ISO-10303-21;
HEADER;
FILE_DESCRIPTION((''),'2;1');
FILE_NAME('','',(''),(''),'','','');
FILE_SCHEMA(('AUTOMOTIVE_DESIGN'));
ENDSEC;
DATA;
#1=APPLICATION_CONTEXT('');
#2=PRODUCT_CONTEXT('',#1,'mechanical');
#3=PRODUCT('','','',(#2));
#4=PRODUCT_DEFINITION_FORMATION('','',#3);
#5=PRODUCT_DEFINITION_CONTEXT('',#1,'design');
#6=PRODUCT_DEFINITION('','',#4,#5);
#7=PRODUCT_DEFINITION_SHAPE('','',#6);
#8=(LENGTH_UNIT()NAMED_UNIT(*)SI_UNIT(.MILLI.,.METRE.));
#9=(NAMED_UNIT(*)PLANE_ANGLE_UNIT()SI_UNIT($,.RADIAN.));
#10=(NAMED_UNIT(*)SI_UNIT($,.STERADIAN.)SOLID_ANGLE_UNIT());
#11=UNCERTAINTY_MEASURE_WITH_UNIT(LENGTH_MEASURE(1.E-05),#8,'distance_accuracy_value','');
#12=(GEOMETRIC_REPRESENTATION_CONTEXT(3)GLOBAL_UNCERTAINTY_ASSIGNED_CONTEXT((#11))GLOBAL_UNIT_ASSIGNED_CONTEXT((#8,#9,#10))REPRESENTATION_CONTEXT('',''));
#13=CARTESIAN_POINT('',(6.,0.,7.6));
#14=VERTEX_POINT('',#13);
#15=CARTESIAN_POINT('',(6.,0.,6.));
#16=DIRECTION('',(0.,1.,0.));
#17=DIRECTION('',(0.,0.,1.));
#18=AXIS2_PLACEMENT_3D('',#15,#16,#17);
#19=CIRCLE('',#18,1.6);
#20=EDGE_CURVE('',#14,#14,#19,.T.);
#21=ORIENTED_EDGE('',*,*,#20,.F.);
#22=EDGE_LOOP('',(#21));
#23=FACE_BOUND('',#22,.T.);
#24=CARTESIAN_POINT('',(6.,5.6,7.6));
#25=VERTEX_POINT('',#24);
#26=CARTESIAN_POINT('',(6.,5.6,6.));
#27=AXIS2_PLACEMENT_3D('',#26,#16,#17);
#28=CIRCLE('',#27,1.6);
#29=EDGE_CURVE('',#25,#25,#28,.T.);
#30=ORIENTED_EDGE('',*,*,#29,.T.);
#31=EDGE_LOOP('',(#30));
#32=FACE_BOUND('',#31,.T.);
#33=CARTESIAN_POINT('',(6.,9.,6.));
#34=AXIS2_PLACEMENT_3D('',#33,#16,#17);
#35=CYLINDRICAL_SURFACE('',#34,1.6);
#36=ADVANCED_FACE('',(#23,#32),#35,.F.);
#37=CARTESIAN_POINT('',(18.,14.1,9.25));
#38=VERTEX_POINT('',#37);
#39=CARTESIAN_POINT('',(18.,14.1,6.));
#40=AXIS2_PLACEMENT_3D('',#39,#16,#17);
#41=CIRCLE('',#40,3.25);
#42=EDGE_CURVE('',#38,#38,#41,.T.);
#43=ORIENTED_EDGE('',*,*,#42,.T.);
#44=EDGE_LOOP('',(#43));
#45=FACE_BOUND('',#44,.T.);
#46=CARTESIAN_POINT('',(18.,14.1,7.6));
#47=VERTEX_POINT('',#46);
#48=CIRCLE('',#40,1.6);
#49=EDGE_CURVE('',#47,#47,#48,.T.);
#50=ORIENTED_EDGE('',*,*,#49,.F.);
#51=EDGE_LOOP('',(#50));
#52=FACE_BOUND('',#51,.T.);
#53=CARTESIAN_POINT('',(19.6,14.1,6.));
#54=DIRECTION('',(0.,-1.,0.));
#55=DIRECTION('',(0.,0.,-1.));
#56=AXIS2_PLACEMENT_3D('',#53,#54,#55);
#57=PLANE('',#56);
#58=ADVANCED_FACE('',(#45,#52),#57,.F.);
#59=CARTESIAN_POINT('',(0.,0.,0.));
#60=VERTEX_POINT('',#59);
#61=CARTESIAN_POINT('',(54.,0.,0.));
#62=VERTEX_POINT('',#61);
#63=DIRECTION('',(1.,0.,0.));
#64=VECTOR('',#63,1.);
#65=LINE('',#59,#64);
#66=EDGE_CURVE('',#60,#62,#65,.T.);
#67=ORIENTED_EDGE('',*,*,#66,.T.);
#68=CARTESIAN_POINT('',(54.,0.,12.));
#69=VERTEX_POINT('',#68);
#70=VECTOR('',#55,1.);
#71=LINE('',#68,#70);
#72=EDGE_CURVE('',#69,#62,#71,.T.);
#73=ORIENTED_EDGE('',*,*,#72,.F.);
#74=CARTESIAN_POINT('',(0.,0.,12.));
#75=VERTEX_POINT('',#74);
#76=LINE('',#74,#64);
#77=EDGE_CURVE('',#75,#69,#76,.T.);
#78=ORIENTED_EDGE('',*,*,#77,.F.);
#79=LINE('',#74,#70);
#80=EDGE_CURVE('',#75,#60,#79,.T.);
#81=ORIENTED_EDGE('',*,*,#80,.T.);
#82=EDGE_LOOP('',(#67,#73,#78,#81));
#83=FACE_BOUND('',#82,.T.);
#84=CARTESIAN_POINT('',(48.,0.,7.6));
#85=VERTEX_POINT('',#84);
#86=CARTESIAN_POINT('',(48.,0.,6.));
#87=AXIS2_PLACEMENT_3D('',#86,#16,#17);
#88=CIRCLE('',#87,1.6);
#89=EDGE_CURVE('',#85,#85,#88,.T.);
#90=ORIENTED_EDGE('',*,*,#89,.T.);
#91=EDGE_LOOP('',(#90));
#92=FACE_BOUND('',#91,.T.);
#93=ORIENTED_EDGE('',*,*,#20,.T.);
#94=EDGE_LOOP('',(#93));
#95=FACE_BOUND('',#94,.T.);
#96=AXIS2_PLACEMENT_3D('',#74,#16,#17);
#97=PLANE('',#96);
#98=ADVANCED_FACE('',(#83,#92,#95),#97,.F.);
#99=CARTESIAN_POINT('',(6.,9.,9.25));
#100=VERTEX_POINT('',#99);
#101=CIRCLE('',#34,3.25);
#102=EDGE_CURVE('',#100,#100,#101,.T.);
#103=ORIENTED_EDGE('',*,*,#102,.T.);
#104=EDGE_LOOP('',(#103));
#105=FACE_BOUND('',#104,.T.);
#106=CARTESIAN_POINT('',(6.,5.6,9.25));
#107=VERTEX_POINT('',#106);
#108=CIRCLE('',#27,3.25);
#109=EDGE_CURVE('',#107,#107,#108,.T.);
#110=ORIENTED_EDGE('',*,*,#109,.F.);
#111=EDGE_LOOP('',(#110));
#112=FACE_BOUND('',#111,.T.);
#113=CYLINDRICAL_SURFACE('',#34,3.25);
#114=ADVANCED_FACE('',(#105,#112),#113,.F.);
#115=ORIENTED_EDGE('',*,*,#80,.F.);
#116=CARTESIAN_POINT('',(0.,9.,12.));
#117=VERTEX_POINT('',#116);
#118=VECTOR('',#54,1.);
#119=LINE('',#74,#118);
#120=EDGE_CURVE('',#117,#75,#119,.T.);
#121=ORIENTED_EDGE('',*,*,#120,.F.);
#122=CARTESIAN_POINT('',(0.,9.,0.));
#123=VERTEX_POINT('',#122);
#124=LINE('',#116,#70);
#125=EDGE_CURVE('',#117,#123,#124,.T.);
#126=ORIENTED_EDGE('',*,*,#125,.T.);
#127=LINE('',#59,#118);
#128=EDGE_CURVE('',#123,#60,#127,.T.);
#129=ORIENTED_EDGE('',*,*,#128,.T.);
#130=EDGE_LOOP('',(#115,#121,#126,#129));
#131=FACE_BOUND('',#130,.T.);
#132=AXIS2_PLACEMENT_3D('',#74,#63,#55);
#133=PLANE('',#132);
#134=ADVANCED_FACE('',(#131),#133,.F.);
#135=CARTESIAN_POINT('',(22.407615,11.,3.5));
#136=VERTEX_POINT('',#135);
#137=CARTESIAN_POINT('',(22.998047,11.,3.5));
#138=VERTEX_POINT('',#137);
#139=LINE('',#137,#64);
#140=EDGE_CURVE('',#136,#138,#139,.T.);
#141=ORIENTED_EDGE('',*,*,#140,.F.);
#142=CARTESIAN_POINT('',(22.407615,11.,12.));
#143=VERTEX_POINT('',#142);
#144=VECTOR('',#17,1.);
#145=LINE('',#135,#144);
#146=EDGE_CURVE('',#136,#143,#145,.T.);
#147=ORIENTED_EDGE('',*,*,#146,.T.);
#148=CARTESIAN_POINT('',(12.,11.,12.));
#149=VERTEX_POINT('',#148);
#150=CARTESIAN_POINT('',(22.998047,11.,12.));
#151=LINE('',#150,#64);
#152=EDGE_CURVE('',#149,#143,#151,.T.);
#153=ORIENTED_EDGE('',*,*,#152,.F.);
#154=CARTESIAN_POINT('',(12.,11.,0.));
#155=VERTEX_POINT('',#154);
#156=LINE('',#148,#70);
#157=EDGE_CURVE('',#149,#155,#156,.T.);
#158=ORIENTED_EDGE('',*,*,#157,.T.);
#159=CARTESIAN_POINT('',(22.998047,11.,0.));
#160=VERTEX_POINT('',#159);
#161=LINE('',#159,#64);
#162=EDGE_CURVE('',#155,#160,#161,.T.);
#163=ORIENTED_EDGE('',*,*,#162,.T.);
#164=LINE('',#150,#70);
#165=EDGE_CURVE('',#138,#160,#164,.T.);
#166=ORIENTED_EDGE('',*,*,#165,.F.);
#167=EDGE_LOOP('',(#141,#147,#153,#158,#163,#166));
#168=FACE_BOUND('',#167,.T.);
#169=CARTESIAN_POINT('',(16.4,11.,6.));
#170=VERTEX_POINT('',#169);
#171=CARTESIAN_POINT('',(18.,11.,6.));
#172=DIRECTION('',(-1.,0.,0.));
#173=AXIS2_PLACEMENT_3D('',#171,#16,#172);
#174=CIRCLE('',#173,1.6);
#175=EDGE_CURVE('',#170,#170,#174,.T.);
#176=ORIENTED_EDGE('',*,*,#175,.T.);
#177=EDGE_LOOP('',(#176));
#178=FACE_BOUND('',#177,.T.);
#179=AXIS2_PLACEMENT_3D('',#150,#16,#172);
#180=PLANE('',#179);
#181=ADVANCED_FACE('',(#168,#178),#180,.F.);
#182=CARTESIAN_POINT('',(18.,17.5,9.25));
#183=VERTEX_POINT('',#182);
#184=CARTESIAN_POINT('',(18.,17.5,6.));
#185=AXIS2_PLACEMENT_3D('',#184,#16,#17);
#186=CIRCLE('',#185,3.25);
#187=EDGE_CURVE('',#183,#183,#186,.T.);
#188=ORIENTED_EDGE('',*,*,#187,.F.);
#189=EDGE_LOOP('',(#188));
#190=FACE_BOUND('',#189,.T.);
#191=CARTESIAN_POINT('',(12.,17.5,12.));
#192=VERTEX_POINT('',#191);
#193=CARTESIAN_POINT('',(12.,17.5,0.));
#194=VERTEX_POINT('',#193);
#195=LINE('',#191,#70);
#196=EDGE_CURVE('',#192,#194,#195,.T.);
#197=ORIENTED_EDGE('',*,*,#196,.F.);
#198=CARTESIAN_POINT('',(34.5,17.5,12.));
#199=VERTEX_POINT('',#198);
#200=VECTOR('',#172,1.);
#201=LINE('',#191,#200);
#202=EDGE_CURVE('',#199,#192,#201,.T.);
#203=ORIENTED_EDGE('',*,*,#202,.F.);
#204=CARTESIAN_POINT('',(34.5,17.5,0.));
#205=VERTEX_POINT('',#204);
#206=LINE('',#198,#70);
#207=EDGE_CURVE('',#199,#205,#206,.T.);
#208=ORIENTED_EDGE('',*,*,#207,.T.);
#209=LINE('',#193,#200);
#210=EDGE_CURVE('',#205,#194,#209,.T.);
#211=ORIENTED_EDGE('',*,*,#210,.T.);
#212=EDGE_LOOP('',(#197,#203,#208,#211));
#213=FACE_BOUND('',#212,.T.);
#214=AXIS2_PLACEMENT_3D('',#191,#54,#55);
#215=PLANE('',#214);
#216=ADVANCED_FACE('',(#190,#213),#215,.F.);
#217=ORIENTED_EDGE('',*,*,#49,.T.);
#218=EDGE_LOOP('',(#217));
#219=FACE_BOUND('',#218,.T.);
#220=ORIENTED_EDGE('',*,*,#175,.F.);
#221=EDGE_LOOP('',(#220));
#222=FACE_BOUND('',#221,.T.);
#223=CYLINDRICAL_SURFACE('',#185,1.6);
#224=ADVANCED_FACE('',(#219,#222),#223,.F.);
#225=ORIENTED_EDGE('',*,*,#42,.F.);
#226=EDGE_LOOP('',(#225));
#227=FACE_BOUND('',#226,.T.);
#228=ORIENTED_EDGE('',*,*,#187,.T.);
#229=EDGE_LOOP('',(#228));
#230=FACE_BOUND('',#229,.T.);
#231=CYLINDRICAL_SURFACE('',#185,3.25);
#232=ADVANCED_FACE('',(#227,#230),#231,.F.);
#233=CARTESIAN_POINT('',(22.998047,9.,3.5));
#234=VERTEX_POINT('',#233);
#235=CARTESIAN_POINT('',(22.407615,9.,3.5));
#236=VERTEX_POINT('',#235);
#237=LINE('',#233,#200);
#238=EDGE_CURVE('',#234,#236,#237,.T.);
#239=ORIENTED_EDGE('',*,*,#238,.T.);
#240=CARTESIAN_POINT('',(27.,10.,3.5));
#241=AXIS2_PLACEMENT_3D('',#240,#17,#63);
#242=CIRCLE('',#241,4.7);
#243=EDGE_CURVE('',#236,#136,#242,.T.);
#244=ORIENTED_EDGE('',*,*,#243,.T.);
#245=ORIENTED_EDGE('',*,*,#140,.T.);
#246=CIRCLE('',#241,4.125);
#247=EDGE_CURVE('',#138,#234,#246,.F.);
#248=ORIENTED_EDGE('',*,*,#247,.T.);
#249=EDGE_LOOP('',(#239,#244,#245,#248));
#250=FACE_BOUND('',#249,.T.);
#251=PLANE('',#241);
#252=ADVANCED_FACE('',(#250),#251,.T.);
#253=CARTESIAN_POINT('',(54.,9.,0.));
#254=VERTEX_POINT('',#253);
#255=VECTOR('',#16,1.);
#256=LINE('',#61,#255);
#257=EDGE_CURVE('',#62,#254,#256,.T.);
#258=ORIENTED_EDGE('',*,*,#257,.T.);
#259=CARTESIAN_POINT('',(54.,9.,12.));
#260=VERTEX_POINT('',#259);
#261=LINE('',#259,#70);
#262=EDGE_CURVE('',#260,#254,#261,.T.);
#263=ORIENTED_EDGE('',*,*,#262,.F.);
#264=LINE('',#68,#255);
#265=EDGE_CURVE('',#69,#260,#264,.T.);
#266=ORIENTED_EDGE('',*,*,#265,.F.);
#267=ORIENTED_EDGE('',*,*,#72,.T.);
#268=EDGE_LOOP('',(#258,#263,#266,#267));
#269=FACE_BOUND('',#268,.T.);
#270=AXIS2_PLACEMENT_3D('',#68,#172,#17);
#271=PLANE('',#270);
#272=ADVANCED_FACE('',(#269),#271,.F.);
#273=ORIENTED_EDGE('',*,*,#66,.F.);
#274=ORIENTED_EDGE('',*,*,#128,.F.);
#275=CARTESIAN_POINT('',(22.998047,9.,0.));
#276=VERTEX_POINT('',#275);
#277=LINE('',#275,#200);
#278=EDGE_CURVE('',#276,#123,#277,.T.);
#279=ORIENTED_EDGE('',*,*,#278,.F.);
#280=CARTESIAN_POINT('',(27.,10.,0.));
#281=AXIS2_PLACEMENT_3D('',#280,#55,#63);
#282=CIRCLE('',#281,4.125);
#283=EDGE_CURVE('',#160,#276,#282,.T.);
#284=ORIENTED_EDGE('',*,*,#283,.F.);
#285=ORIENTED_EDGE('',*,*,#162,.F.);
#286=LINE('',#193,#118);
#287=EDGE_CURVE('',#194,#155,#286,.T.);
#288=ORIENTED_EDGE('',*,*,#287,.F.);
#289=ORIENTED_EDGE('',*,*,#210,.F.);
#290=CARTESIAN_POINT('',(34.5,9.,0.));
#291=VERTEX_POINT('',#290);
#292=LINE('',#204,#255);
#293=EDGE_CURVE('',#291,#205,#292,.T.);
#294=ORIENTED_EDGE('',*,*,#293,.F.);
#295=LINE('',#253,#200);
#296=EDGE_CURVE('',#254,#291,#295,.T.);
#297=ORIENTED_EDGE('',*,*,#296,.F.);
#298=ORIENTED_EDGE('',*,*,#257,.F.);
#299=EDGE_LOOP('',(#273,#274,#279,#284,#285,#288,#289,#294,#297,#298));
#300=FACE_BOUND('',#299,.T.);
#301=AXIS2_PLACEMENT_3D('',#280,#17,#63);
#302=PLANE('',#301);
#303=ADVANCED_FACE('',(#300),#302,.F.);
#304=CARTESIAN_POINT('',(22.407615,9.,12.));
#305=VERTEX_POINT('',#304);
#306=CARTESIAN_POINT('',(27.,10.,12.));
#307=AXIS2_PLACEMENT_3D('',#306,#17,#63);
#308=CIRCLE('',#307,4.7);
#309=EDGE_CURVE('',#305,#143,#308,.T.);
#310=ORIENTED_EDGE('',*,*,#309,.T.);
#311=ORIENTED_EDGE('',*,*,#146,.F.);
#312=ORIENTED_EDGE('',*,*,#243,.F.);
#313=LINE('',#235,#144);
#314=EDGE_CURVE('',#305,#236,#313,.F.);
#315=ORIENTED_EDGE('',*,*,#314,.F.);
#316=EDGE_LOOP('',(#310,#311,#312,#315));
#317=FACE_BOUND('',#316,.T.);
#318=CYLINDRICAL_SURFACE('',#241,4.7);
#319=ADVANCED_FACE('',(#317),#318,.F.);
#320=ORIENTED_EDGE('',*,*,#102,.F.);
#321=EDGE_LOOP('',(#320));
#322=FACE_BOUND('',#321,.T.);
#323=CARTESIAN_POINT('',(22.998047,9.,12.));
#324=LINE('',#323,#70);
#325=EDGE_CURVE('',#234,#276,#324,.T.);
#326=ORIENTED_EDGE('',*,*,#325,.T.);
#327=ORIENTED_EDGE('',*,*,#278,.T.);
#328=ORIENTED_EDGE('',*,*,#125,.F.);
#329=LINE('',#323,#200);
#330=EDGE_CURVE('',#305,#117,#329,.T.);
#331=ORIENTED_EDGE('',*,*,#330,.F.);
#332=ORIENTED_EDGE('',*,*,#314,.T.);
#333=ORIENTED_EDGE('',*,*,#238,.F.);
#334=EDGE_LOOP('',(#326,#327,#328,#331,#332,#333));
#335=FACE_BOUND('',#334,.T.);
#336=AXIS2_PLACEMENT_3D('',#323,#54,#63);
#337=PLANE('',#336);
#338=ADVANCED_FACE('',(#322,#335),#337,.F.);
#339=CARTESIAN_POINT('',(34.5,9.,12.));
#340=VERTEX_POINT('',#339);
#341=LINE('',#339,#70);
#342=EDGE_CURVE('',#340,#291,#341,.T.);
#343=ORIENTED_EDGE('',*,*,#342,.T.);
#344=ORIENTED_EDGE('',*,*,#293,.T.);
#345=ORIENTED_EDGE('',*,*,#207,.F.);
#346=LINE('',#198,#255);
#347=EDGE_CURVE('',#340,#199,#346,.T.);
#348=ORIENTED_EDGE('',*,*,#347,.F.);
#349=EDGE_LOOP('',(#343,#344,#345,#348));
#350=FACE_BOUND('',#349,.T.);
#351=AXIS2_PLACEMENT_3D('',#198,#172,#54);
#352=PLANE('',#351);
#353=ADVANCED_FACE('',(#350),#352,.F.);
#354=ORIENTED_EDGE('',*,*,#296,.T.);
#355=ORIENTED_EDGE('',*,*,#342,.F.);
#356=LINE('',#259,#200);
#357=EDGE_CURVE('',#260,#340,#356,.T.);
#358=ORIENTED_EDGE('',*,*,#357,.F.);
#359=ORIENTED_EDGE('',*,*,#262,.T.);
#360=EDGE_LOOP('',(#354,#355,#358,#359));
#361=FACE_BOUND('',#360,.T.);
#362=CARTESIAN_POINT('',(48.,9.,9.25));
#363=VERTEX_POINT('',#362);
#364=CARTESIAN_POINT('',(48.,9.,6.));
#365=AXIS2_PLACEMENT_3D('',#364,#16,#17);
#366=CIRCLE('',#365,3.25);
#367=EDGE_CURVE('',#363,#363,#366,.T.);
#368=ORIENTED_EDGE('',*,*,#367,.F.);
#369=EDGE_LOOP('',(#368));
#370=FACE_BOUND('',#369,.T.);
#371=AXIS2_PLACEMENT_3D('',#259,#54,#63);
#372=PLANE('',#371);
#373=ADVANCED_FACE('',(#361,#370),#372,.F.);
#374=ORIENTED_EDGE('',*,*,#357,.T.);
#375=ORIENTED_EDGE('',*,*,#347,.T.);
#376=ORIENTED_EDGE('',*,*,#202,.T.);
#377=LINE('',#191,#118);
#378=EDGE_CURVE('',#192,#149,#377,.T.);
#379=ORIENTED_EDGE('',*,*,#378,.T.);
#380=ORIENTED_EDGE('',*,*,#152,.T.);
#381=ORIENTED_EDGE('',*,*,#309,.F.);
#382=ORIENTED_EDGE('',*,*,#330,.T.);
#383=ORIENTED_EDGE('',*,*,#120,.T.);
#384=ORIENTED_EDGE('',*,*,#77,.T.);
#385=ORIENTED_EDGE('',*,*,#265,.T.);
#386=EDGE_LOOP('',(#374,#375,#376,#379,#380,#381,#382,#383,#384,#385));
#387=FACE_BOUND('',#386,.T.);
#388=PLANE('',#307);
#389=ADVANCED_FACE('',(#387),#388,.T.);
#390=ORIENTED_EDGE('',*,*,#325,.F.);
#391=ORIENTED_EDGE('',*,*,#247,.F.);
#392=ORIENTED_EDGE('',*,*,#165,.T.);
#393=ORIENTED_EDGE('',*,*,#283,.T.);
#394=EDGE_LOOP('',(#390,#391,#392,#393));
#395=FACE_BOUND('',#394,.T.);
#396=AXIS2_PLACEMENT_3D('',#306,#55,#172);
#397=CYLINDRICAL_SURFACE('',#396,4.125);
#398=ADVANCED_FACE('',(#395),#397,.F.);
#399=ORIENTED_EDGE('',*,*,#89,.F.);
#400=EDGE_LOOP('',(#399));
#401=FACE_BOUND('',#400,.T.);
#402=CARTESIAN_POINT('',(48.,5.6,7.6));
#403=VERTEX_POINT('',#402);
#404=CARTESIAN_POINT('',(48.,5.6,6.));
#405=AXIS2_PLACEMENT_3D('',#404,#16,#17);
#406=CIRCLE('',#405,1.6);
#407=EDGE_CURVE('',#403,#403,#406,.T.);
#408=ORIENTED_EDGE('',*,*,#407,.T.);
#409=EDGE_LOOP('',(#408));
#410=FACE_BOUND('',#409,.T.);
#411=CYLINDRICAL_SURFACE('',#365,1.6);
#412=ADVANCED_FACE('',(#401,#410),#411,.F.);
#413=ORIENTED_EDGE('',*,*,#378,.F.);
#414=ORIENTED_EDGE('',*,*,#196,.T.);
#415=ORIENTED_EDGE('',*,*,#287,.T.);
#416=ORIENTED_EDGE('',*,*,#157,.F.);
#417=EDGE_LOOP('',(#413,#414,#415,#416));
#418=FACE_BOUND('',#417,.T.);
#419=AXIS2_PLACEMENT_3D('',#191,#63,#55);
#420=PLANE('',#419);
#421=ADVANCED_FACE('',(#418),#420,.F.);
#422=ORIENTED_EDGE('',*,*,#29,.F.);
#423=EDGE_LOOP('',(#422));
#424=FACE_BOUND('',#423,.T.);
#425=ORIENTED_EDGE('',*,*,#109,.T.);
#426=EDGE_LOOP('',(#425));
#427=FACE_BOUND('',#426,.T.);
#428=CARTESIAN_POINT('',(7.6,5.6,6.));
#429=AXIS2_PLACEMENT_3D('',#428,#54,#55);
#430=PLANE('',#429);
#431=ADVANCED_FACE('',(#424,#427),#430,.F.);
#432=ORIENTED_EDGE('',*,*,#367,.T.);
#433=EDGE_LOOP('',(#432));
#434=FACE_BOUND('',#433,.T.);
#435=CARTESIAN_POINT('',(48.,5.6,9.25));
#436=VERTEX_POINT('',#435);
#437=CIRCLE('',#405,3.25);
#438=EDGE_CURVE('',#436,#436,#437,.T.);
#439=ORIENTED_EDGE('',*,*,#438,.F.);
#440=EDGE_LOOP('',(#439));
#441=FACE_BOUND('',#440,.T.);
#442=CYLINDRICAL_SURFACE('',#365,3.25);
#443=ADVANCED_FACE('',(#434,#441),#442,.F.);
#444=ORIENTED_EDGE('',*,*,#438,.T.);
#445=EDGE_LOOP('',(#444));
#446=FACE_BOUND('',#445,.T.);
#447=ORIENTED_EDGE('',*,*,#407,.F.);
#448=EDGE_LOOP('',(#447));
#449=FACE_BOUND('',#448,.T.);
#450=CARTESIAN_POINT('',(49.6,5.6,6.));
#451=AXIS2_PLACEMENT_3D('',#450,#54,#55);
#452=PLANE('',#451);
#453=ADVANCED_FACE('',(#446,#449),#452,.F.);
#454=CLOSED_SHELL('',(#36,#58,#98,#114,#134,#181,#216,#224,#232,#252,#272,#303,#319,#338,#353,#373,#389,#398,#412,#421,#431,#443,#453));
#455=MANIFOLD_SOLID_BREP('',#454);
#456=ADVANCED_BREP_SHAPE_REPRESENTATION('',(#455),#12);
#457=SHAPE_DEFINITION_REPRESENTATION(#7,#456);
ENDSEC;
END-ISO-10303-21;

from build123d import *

# Parameters (mm, degrees)
AUFSATZ_LINEAR_AUSTRAGEN1_DEPTH                = 12
SKIZZE4_R                                      = 4.7
SCHNITT_LINEAR_AUSTRAGEN1_DEPTH                = 8.5
STIRNSENKUNG_START                             = 5.6
STIRNSENKUNG_F_R_M3_ZYLINDERSCHRAUBE_2_R       = 3.25
STIRNSENKUNG_F_R_M3_ZYLINDERSCHRAUBE_MIT_DEPTH = 3.4
STIRNSENKUNG_START_2                           = 14.1
STIRNSENKUNG_F_R_M3_ZYLINDERSCHRAUBE_3_O_R     = 3.25
STIRNSENKUNG_F_R_M3_ZYLINDERSCHRAUBE_3_DEPTH   = 3.4
STIRNSENKUNG_F_R_M3_ZYLINDERSCHRAUBE_4_O_R     = 1.6
STIRNSENKUNG_F_R_M3_ZYLINDERSCHRAUBE_4_DEPTH   = 5.6
STIRNSENKUNG_START_3                           = 11
STIRNSENKUNG_F_R_M3_ZYLINDERSCHRAUBE_5_O_R     = 1.6
STIRNSENKUNG_F_R_M3_ZYLINDERSCHRAUBE_5_DEPTH   = 3.1


# Read off the part's stored shape, not the designer's step: Stirnsenkung für M3 Zylinderschraube mit Innensechskant1
with BuildPart() as part:
    # Skizze1 → Aufsatz-Linear austragen1 (new body)
    with BuildSketch(Plane.XY):
        with BuildLine():
            Line((0, 0), (54, 0))
            Line((54, 0), (54, 9))
            Line((54, 9), (34.5, 9))
            Line((34.5, 9), (34.5, 17.5))
            Line((34.5, 17.5), (12, 17.5))
            Line((12, 17.5), (12, 11))
            Line((12, 11), (22.998047352, 11))
            ThreePointArc((22.998047352, 11), (31.125, 10), (22.998047352, 9))
            Line((22.998047352, 9), (0, 9))
            Line((0, 9), (0, 0))
        make_face()
    extrude(amount=AUFSATZ_LINEAR_AUSTRAGEN1_DEPTH)

    # Skizze4 → Schnitt-Linear austragen1 (cut)
    with BuildSketch(Plane.XY.offset(12)):
        with Locations((27, 10)):
            Circle(SKIZZE4_R)
    extrude(amount=-SCHNITT_LINEAR_AUSTRAGEN1_DEPTH, mode=Mode.SUBTRACT)

    # Stirnsenkung f_r M3 Zylinderschraube 2 → Stirnsenkung für M3 Zylinderschraube mit Innensechskant1 (cut)
    with BuildSketch(Plane(origin=(0, 0, 0), x_dir=(1, 0, 0), z_dir=(0, 1, 0)).offset(STIRNSENKUNG_START)):
        with Locations((48, -6)):
            Circle(STIRNSENKUNG_F_R_M3_ZYLINDERSCHRAUBE_2_R)
        with Locations((6, -6)):
            Circle(STIRNSENKUNG_F_R_M3_ZYLINDERSCHRAUBE_2_R)
    extrude(amount=STIRNSENKUNG_F_R_M3_ZYLINDERSCHRAUBE_MIT_DEPTH, mode=Mode.SUBTRACT)

    # Stirnsenkung f_r M3 Zylinderschraube 3 o → Stirnsenkung f_r M3 Zylinderschraube 3 (cut)
    with BuildSketch(Plane(origin=(0, 0, 0), x_dir=(1, 0, 0), z_dir=(0, 1, 0)).offset(STIRNSENKUNG_START_2)):
        with Locations((18, -6)):
            Circle(STIRNSENKUNG_F_R_M3_ZYLINDERSCHRAUBE_3_O_R)
    extrude(amount=STIRNSENKUNG_F_R_M3_ZYLINDERSCHRAUBE_3_DEPTH, mode=Mode.SUBTRACT)

    # Stirnsenkung f_r M3 Zylinderschraube 4 o → Stirnsenkung f_r M3 Zylinderschraube 4 (cut)
    with BuildSketch(Plane(origin=(0, 0, 0), x_dir=(1, 0, 0), z_dir=(0, 1, 0))):
        with Locations((48, -6)):
            Circle(STIRNSENKUNG_F_R_M3_ZYLINDERSCHRAUBE_4_O_R)
        with Locations((6, -6)):
            Circle(STIRNSENKUNG_F_R_M3_ZYLINDERSCHRAUBE_4_O_R)
    extrude(amount=STIRNSENKUNG_F_R_M3_ZYLINDERSCHRAUBE_4_DEPTH, mode=Mode.SUBTRACT)

    # Stirnsenkung f_r M3 Zylinderschraube 5 o → Stirnsenkung f_r M3 Zylinderschraube 5 (cut)
    with BuildSketch(Plane(origin=(0, 0, 0), x_dir=(1, 0, 0), z_dir=(0, 1, 0)).offset(STIRNSENKUNG_START_3)):
        with Locations((18, -6)):
            Circle(STIRNSENKUNG_F_R_M3_ZYLINDERSCHRAUBE_5_O_R)
    extrude(amount=STIRNSENKUNG_F_R_M3_ZYLINDERSCHRAUBE_5_DEPTH, mode=Mode.SUBTRACT)


solid = part.part
